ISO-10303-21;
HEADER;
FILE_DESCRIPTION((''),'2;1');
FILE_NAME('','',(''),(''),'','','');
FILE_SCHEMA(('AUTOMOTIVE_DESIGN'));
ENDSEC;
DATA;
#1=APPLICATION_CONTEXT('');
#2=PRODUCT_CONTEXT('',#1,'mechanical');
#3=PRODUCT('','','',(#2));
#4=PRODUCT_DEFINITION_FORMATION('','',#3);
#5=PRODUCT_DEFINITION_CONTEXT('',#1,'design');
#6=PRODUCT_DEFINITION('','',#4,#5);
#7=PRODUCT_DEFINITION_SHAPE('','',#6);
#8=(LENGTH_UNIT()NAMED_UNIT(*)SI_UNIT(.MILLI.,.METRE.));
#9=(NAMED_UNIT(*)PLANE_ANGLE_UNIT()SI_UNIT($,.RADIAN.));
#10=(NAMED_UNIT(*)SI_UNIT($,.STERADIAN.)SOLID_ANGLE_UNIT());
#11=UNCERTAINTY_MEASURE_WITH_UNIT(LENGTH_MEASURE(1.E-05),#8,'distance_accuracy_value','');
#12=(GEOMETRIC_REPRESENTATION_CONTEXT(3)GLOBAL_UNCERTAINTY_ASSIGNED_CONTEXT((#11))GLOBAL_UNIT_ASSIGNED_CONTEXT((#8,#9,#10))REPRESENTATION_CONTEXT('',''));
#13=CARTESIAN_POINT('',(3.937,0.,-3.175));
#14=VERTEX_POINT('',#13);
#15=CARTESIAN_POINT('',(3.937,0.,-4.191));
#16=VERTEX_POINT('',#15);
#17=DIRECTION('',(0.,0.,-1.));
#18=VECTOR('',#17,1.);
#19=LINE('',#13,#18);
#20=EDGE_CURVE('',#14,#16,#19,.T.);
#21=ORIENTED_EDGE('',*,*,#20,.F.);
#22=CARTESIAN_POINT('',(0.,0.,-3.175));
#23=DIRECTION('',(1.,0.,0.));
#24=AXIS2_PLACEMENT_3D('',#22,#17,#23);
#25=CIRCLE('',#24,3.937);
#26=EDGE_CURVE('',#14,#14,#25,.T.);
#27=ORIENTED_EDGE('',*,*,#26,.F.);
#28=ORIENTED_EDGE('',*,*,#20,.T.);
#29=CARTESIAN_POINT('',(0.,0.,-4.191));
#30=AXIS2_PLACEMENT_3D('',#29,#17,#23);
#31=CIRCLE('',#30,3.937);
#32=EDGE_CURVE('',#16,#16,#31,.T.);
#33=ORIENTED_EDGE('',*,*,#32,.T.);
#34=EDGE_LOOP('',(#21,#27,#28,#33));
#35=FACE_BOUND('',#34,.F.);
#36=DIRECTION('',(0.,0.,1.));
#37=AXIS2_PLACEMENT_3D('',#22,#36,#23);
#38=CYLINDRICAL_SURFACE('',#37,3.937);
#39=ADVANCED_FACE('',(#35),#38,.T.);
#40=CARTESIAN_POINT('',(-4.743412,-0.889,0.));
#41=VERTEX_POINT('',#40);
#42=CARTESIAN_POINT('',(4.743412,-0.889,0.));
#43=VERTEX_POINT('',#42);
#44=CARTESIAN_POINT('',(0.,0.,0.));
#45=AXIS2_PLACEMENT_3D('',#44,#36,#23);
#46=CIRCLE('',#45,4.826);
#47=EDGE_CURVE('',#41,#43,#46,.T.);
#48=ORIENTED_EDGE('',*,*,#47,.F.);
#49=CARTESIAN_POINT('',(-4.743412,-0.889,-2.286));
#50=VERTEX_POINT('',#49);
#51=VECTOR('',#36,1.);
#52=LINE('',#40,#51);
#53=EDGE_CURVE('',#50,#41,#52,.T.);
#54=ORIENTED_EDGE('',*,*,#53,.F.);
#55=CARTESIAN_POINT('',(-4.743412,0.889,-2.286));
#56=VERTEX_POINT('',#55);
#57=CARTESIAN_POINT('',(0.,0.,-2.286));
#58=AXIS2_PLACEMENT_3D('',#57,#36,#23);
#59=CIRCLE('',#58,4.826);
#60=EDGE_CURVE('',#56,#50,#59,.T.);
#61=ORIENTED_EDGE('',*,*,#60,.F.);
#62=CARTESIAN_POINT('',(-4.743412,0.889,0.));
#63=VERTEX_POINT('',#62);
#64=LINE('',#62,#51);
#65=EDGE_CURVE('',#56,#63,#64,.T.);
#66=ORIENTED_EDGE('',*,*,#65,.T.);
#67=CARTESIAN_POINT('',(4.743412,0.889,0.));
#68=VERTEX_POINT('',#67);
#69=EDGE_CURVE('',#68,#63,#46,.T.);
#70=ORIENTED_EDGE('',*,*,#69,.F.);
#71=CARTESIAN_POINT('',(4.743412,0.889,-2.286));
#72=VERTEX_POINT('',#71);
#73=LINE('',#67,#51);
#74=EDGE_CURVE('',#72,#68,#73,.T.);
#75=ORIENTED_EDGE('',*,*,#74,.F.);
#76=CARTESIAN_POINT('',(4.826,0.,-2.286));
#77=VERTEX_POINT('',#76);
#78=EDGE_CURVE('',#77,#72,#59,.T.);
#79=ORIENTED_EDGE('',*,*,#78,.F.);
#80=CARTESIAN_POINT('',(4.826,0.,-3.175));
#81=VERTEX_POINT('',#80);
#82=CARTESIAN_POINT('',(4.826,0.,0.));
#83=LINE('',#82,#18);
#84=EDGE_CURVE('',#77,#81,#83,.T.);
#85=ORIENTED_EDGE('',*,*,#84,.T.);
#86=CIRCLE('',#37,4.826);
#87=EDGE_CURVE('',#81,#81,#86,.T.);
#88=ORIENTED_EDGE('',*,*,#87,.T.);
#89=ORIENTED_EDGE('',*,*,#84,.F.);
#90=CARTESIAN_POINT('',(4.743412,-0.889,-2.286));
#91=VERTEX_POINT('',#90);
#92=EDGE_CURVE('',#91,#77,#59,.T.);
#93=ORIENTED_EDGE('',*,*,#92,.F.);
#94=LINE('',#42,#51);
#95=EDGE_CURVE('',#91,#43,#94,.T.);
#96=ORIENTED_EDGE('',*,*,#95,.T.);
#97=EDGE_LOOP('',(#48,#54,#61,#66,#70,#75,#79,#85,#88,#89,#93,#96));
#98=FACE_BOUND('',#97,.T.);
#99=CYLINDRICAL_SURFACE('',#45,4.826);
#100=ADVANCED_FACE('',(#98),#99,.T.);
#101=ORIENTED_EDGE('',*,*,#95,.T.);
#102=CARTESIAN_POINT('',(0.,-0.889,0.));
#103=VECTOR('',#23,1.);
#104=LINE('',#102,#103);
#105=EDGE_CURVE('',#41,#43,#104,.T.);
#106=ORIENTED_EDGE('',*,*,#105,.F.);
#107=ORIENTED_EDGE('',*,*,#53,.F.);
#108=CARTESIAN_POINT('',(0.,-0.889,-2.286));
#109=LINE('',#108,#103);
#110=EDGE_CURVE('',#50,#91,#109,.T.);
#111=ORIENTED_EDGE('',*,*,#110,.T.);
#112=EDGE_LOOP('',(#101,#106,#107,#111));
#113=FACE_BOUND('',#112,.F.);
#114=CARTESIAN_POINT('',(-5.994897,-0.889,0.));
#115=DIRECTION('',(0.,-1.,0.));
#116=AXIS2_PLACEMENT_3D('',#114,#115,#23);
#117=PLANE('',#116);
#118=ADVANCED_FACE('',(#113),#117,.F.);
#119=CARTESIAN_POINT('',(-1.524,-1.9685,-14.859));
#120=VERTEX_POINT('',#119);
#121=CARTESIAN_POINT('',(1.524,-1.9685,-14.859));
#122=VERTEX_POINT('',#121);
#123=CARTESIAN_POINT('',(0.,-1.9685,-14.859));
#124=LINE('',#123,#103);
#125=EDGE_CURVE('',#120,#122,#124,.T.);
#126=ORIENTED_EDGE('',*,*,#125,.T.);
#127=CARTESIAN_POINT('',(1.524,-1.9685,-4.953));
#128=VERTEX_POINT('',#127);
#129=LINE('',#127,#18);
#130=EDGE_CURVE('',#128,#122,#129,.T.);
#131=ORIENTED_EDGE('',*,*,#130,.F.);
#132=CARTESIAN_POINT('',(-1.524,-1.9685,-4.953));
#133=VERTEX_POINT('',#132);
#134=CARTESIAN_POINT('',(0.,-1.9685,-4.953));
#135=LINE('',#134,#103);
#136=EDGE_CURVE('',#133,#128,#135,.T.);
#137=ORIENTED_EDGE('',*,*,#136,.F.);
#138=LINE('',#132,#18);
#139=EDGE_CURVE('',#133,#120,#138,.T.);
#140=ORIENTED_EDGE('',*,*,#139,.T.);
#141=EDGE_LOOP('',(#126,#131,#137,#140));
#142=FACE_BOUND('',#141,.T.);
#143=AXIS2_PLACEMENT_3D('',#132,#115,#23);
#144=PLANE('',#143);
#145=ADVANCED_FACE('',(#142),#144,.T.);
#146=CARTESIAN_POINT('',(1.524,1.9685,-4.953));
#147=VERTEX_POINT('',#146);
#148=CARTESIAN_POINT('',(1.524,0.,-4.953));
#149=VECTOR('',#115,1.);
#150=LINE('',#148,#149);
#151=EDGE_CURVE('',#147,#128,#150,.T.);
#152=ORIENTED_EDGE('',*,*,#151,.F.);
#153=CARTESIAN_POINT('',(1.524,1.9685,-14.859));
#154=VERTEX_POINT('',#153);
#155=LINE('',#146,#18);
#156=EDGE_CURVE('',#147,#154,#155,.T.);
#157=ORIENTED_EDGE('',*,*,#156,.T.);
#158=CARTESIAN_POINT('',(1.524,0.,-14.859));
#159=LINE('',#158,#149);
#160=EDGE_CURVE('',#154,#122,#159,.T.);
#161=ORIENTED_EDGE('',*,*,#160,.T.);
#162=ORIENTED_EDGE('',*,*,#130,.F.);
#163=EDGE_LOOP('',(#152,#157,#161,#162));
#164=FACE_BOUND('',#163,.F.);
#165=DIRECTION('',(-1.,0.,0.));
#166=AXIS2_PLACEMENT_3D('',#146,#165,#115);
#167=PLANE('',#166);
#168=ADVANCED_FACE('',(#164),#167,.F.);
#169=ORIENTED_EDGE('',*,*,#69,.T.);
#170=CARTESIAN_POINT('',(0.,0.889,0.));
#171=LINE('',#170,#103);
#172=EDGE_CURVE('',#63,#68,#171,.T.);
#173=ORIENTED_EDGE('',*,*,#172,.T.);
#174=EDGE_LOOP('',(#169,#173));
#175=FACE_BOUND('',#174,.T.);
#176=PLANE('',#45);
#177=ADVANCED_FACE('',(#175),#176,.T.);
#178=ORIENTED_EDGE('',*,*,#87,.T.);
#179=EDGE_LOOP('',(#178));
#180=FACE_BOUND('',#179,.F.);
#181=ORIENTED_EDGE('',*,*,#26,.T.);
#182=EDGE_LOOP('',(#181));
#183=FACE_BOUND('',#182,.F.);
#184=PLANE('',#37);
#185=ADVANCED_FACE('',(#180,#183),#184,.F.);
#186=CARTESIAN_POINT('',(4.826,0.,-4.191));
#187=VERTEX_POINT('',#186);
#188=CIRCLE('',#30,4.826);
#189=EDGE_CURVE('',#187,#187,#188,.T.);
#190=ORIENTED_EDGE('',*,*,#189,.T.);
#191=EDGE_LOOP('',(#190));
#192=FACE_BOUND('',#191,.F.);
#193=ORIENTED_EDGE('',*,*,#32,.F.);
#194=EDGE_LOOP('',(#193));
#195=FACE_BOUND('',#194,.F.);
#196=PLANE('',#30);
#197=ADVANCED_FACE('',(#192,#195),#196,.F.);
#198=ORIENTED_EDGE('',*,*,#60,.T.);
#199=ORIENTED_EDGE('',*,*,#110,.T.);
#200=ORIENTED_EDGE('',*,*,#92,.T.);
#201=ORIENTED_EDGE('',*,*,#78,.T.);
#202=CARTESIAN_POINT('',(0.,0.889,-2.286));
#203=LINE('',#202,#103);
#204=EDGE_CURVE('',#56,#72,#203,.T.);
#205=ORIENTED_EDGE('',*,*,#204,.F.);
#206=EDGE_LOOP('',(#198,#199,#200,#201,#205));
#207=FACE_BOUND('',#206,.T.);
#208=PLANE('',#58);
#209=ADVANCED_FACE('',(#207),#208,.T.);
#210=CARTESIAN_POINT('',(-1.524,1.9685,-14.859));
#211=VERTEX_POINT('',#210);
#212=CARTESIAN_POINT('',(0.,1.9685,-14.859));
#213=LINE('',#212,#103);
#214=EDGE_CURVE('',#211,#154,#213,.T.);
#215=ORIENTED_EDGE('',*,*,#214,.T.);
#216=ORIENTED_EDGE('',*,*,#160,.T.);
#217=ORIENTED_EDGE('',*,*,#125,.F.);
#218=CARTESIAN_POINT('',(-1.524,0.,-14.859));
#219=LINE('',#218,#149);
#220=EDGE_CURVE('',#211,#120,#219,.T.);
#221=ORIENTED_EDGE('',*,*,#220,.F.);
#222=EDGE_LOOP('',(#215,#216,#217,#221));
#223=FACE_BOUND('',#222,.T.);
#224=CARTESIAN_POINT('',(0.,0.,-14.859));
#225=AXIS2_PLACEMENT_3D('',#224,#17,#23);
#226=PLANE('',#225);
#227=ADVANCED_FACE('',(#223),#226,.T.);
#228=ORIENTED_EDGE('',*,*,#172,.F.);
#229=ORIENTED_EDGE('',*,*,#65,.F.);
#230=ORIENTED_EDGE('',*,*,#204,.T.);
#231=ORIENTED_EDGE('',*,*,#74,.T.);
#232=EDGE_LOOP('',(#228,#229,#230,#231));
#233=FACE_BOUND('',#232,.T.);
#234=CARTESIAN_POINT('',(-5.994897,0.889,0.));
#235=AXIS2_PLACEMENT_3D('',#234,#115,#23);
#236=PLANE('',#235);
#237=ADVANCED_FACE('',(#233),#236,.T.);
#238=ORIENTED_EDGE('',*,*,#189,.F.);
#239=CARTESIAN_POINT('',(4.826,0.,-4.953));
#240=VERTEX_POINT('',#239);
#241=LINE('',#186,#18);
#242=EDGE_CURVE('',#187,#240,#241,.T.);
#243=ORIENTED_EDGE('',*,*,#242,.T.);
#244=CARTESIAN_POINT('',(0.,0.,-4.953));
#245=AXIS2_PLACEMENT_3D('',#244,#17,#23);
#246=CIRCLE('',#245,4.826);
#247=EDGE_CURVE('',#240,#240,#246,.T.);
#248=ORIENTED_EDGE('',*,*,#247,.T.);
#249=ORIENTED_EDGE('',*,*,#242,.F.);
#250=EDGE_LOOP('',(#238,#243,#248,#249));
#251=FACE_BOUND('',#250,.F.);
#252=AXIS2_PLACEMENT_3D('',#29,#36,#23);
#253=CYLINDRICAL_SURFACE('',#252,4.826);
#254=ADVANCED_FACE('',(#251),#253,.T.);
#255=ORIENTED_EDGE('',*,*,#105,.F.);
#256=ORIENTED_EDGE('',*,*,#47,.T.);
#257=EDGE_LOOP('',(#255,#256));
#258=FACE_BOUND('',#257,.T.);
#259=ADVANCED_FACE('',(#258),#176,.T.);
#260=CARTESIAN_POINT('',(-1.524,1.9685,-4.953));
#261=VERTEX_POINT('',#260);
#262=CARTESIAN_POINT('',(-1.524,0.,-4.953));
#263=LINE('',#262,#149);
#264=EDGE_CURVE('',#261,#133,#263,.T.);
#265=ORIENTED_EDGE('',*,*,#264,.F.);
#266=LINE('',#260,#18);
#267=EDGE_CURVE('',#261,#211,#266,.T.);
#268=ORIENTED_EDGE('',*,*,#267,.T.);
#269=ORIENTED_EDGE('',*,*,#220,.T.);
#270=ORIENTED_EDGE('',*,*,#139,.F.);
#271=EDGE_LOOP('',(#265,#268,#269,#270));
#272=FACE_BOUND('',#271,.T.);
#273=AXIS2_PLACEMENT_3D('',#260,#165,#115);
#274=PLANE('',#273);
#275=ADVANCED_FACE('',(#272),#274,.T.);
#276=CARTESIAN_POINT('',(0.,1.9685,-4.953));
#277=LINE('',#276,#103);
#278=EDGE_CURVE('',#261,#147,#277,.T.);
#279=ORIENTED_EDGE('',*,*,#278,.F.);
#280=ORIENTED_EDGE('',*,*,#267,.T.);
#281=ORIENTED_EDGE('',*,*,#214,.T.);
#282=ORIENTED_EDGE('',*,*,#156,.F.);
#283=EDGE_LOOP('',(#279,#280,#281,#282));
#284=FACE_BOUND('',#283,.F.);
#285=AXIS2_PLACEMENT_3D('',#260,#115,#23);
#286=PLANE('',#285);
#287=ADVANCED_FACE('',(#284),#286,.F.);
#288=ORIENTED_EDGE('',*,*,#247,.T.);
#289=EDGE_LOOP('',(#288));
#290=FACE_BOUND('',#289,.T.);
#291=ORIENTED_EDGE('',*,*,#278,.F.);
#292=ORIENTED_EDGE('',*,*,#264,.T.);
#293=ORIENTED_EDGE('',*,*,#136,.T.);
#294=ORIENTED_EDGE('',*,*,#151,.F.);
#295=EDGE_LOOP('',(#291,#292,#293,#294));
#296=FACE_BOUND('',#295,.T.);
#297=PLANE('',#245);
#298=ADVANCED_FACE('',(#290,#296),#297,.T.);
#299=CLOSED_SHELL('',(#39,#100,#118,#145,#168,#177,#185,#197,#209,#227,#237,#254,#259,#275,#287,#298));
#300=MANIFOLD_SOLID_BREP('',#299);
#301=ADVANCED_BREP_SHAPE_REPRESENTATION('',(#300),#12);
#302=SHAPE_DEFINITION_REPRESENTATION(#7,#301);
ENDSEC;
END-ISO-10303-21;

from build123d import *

# Parameters (mm, degrees)
F0_R     = 4.826
F1_DEPTH = 3.175
F2_W     = 11.9897948747
F2_H     = 1.778
F3_DEPTH = 2.286
F4_R     = 3.937
F5_DEPTH = 1.016
F6_R     = 4.826
F7_DEPTH = 0.762
F8_W     = 3.048
F8_H     = 3.937
F9_DEPTH = 9.906


# Not quite as in the source:
# - the program builds the solid bodies; features that only make, move or delete a surface that nothing else refers to are left out


with BuildPart() as f1:
    # F0 (on Top) → F1 (new body)
    with BuildSketch(Plane.XY):
        Circle(F0_R)
    extrude(amount=-F1_DEPTH)

    # F2 (on face) → F3 (cut)
    with BuildSketch(Plane.XY):
        Rectangle(F2_W, F2_H)
    extrude(amount=-F3_DEPTH, mode=Mode.SUBTRACT)

    # F4 (on face) → F5 (join)
    with BuildSketch(Plane(origin=(0, 0, -3.175), x_dir=(1, 0, 0), z_dir=(0, 0, -1))):
        Circle(F4_R)
    extrude(amount=F5_DEPTH)

    # F6 (on face) → F7 (join)
    with BuildSketch(Plane(origin=(0, 0, -4.191), x_dir=(1, 0, 0), z_dir=(0, 0, -1))):
        Circle(F6_R)
    extrude(amount=F7_DEPTH)

    # F8 (on face) → F9 (join)
    with BuildSketch(Plane(origin=(0, 0, -4.953), x_dir=(1, 0, 0), z_dir=(0, 0, -1))):
        Rectangle(F8_W, F8_H)
    extrude(amount=F9_DEPTH)


solid = f1.part
